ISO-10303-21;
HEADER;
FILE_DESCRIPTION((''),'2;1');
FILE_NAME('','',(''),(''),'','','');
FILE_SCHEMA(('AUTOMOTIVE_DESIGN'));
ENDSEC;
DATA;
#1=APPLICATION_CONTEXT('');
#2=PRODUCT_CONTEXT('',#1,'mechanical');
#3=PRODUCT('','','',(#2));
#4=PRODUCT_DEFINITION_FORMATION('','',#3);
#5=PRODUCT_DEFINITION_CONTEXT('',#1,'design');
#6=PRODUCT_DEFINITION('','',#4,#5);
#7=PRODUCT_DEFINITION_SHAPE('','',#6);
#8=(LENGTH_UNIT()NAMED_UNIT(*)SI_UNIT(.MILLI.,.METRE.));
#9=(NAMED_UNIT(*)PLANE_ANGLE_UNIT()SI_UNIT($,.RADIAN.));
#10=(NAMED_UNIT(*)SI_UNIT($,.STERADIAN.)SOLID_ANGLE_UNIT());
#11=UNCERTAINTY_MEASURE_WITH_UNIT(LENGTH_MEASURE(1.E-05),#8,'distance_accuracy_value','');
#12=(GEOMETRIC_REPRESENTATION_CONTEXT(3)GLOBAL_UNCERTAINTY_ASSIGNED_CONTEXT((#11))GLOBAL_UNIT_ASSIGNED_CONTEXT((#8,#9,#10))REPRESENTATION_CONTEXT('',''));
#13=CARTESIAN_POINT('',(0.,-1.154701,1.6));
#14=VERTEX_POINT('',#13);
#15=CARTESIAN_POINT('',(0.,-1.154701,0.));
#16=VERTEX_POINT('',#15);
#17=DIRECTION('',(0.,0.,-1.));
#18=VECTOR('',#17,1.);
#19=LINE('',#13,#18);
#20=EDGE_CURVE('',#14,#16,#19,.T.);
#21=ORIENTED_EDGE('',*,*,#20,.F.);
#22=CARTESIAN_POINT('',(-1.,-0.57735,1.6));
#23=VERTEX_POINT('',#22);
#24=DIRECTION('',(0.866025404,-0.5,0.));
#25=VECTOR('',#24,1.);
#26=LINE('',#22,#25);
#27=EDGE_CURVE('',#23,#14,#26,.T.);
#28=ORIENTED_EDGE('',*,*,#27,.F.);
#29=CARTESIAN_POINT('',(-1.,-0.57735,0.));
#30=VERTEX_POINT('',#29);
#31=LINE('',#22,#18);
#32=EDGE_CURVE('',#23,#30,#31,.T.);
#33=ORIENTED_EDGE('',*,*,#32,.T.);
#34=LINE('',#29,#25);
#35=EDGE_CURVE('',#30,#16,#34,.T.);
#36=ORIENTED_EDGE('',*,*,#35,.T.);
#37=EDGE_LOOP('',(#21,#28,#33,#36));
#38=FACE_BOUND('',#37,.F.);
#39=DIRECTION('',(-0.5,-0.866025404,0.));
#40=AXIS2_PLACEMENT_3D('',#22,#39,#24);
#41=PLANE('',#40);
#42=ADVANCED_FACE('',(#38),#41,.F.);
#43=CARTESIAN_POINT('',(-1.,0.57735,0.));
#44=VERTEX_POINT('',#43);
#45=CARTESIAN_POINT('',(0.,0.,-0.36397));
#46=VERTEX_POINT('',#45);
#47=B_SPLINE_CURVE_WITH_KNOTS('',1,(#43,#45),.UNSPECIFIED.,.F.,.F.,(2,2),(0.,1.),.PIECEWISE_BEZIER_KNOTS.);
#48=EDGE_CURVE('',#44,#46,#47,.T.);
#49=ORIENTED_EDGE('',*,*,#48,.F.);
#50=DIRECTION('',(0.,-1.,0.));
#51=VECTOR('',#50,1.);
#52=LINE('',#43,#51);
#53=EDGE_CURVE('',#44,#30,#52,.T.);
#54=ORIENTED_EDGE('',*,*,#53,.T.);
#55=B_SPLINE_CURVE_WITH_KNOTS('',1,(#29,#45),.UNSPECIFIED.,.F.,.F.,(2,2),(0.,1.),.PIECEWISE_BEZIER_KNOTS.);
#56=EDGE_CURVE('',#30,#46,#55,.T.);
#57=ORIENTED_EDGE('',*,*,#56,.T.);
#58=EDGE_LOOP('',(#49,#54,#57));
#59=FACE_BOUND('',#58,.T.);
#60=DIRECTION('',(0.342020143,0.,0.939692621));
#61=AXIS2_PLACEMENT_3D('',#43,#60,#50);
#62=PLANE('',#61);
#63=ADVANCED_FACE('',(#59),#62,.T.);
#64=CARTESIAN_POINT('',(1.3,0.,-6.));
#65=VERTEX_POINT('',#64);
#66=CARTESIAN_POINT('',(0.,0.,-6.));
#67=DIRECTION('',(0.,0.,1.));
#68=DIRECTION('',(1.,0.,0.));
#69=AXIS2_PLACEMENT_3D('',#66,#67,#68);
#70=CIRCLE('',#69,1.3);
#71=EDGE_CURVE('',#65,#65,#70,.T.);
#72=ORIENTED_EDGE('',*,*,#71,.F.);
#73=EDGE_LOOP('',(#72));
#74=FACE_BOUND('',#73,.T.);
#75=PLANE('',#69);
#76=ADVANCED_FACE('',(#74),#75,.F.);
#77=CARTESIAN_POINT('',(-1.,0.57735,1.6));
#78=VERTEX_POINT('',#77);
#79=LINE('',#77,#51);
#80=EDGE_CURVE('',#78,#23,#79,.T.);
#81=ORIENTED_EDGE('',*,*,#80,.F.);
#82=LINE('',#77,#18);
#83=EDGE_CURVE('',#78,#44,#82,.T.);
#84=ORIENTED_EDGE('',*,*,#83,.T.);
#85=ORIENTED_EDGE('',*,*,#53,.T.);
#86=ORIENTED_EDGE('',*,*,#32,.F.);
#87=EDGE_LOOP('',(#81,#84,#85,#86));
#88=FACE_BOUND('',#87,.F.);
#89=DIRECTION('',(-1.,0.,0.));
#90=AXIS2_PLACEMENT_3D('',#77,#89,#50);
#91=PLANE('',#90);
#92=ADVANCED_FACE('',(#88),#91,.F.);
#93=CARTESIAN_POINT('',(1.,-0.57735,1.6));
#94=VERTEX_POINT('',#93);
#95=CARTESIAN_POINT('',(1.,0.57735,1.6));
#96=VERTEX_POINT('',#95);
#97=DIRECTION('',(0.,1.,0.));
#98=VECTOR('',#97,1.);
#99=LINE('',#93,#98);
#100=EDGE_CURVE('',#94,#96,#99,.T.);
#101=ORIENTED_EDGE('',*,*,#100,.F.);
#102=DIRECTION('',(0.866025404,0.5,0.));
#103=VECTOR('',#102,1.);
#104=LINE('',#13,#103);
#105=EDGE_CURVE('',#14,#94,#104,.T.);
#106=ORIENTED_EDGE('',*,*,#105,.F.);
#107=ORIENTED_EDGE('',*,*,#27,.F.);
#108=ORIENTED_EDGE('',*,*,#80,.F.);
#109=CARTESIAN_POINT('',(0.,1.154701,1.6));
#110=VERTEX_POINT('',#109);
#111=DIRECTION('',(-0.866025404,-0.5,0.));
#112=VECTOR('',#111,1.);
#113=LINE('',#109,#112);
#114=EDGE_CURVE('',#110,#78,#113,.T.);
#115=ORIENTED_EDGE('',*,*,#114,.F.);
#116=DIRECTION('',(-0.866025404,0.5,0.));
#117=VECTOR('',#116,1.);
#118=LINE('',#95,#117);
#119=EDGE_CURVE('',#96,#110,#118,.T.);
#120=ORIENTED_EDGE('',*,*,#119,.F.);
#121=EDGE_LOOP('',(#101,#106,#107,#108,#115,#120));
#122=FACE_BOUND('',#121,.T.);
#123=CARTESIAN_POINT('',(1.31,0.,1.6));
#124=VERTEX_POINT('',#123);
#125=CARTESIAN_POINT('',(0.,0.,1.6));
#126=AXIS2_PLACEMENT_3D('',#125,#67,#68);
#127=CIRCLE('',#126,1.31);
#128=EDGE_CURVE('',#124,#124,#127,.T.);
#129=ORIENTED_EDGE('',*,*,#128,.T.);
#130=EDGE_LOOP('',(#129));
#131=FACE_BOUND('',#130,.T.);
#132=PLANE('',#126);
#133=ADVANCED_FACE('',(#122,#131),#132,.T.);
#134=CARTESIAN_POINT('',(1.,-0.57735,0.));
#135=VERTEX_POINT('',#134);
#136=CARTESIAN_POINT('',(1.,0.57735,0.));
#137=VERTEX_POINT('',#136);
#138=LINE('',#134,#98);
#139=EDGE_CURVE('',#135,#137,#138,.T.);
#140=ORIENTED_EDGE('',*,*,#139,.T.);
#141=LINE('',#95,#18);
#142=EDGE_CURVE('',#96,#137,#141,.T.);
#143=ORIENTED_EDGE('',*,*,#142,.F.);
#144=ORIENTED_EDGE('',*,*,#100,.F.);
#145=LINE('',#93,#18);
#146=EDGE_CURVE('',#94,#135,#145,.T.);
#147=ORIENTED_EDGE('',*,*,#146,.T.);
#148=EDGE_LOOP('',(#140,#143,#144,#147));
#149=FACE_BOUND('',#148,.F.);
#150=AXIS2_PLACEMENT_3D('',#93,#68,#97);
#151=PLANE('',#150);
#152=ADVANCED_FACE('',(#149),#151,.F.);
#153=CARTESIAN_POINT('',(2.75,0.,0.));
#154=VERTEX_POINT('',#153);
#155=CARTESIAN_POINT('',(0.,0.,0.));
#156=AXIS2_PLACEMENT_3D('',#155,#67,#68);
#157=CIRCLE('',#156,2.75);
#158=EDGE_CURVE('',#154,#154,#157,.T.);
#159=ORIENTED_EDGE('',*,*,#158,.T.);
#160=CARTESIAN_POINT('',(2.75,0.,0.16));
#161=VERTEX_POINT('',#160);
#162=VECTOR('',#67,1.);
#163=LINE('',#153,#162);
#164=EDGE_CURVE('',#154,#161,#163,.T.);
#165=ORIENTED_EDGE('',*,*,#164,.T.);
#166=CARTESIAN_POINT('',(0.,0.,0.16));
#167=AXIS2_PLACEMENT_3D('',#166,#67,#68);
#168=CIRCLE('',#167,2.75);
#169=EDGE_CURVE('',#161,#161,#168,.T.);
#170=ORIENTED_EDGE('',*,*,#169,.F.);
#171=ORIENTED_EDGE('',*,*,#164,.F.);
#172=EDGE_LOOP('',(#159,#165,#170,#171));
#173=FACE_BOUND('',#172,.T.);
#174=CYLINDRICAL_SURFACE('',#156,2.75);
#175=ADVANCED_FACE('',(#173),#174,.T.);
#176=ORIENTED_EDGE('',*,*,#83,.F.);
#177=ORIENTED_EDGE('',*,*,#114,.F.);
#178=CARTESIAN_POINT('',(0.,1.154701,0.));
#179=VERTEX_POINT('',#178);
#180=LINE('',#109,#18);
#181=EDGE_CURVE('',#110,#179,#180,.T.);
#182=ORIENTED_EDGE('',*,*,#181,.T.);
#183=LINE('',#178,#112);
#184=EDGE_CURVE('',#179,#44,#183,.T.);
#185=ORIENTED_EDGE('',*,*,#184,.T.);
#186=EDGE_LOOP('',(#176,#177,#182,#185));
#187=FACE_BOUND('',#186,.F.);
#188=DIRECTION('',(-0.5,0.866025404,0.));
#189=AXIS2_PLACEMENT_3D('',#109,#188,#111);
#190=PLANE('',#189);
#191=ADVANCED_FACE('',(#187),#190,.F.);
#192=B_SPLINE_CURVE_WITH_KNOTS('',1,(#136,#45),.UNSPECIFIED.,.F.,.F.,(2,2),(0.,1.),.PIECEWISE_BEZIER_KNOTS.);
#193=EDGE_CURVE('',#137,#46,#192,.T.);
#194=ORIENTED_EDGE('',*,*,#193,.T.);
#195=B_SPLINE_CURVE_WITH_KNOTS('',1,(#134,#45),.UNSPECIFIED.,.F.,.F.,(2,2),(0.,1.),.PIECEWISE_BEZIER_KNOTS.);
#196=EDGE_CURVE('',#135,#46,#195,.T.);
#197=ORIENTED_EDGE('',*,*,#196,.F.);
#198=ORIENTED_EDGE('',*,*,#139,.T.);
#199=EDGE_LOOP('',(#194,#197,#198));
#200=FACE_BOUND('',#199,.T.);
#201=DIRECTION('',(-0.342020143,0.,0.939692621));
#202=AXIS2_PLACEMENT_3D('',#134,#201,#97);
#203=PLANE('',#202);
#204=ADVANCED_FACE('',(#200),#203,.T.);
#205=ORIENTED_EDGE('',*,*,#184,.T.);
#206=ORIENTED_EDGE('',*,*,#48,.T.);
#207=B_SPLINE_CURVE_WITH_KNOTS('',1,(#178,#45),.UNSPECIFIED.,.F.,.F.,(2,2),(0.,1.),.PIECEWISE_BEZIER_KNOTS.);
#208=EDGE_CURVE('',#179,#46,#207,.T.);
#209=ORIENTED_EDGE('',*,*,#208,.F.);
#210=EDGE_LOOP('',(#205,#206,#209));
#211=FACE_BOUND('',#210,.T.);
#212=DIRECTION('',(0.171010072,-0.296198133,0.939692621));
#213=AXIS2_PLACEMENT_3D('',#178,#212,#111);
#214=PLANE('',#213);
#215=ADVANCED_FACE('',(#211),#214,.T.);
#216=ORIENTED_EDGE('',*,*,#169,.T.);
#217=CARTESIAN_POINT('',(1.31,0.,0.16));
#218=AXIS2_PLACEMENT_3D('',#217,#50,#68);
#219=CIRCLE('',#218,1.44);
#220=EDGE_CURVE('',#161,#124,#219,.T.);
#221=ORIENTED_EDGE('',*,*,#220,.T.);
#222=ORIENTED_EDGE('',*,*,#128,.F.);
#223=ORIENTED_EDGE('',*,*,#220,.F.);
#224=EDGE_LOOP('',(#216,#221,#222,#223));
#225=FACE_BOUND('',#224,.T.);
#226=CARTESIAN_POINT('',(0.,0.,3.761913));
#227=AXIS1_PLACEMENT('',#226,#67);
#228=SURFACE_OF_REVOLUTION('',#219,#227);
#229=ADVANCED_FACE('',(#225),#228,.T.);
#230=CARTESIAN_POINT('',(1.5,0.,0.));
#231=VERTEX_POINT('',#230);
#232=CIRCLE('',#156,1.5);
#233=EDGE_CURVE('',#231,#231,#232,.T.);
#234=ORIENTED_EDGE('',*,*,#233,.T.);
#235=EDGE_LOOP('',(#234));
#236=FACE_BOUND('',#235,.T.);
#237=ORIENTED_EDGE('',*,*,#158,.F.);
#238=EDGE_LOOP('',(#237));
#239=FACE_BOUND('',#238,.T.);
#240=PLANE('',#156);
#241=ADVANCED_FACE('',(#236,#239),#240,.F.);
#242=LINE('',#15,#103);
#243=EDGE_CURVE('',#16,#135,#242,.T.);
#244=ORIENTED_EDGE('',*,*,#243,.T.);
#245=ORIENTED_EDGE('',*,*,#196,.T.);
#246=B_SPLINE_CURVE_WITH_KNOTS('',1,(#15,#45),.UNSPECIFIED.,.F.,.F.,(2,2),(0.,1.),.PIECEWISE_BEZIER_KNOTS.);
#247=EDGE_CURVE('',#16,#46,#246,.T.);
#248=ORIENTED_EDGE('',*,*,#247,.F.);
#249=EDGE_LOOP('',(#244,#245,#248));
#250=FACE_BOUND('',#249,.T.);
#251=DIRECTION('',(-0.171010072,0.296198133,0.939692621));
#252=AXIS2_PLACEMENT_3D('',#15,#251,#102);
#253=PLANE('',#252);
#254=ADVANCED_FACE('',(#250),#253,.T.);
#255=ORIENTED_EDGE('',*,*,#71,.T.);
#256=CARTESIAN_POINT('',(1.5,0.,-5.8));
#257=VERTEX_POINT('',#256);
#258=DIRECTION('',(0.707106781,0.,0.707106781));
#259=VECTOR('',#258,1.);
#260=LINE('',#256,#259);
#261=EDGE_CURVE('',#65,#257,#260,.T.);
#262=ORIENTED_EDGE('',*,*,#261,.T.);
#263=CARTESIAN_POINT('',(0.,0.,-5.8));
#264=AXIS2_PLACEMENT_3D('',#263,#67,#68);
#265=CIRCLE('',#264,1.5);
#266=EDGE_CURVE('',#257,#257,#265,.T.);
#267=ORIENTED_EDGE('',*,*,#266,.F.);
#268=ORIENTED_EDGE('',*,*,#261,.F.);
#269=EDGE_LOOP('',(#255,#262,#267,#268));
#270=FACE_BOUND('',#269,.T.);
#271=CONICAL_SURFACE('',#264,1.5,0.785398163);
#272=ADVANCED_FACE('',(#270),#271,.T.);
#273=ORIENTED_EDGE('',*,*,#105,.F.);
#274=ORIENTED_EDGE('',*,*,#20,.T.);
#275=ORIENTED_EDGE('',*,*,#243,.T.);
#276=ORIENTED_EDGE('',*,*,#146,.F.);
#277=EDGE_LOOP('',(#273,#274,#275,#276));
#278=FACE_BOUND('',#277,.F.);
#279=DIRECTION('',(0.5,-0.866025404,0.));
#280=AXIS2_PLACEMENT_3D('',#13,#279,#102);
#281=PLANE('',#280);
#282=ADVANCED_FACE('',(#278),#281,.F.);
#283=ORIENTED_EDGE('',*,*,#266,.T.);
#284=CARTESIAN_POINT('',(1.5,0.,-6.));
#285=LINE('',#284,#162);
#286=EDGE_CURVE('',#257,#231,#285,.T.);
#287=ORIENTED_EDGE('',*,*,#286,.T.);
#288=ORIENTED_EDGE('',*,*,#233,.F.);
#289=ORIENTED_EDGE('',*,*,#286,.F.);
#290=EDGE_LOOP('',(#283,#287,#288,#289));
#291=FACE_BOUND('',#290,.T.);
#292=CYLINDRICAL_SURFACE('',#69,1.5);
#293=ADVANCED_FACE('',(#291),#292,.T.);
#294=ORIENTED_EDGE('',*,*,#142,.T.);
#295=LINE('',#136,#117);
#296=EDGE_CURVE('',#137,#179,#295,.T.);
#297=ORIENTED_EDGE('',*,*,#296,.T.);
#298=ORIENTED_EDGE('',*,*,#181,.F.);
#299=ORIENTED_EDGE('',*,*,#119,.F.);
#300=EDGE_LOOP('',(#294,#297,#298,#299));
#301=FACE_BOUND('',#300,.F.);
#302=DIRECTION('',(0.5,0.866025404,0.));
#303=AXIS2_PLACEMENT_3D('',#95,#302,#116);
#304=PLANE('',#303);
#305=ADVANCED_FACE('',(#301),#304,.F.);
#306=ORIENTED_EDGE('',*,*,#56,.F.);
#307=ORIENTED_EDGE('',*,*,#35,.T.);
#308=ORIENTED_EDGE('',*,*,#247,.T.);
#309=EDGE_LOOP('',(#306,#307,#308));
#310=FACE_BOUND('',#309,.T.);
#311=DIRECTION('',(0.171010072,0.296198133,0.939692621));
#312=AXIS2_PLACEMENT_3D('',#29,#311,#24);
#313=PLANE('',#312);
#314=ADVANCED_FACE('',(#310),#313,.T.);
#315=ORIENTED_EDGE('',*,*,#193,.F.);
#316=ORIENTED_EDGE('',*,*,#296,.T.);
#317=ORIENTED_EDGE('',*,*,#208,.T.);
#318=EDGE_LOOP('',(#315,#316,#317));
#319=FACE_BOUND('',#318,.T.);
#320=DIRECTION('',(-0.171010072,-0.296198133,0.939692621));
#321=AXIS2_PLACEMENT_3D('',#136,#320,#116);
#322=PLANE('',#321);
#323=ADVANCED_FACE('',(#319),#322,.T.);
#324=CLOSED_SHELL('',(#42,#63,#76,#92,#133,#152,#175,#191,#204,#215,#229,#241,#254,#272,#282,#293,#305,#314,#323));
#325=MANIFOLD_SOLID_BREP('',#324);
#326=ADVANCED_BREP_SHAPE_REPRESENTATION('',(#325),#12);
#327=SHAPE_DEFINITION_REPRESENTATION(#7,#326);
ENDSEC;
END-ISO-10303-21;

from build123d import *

# Parameters (mm, degrees)
F3_DEPTH = 1.6
F6_SIZE  = 0.2


# Not quite as in the source:
# - an extrude whose draft closes it to a point is written as a loft to that point


with BuildPart() as f1:
    # F0 (on Front) → F1 (revolve)
    with BuildSketch(Plane.XZ):
        with BuildLine():
            Line((0, 1.6), (0, -6))
            Line((0, -6), (1.5, -6))
            Line((1.5, -6), (1.5, 0))
            Line((1.5, 0), (2.75, 0))
            Line((2.75, 0), (2.75, 0.16))
            ThreePointArc((2.75, 0.16), (2.3282337649, 1.1782337649), (1.31, 1.6))
            Line((1.31, 1.6), (0, 1.6))
        make_face()
    revolve(axis=Axis((0, 0, 3.7619129732), (0, 0, 1)))

    # F2 (on face) → F3 (cut)
    with BuildSketch(Plane.XY.offset(1.6)):
        Polygon((-1, 0.5773502692), (-1, -0.5773502692), (0, -1.1547005384), (1, -0.5773502692), (1, 0.5773502692), (0, 1.1547005384), align=None)
    extrude(amount=-F3_DEPTH, mode=Mode.SUBTRACT)

    # F4 (on face) → F5 section 0
    with BuildSketch(Plane.XY, mode=Mode.PRIVATE) as f5_s0:
        Polygon((-1, 0.5773502692), (-1, -0.5773502692), (0, -1.1547005384), (1, -0.5773502692), (1, 0.5773502692), (0, 1.1547005384), align=None)
    loft([f5_s0.sketch, Vertex(0, 0, -0.3639702343)], ruled=True, mode=Mode.SUBTRACT)

    # F6
    f6_edges = [f1.edges().sort_by_distance(p)[0] for p in [
        (-1.5, 0, -6),
    ]]
    chamfer(f6_edges, length=F6_SIZE)


solid = f1.part
